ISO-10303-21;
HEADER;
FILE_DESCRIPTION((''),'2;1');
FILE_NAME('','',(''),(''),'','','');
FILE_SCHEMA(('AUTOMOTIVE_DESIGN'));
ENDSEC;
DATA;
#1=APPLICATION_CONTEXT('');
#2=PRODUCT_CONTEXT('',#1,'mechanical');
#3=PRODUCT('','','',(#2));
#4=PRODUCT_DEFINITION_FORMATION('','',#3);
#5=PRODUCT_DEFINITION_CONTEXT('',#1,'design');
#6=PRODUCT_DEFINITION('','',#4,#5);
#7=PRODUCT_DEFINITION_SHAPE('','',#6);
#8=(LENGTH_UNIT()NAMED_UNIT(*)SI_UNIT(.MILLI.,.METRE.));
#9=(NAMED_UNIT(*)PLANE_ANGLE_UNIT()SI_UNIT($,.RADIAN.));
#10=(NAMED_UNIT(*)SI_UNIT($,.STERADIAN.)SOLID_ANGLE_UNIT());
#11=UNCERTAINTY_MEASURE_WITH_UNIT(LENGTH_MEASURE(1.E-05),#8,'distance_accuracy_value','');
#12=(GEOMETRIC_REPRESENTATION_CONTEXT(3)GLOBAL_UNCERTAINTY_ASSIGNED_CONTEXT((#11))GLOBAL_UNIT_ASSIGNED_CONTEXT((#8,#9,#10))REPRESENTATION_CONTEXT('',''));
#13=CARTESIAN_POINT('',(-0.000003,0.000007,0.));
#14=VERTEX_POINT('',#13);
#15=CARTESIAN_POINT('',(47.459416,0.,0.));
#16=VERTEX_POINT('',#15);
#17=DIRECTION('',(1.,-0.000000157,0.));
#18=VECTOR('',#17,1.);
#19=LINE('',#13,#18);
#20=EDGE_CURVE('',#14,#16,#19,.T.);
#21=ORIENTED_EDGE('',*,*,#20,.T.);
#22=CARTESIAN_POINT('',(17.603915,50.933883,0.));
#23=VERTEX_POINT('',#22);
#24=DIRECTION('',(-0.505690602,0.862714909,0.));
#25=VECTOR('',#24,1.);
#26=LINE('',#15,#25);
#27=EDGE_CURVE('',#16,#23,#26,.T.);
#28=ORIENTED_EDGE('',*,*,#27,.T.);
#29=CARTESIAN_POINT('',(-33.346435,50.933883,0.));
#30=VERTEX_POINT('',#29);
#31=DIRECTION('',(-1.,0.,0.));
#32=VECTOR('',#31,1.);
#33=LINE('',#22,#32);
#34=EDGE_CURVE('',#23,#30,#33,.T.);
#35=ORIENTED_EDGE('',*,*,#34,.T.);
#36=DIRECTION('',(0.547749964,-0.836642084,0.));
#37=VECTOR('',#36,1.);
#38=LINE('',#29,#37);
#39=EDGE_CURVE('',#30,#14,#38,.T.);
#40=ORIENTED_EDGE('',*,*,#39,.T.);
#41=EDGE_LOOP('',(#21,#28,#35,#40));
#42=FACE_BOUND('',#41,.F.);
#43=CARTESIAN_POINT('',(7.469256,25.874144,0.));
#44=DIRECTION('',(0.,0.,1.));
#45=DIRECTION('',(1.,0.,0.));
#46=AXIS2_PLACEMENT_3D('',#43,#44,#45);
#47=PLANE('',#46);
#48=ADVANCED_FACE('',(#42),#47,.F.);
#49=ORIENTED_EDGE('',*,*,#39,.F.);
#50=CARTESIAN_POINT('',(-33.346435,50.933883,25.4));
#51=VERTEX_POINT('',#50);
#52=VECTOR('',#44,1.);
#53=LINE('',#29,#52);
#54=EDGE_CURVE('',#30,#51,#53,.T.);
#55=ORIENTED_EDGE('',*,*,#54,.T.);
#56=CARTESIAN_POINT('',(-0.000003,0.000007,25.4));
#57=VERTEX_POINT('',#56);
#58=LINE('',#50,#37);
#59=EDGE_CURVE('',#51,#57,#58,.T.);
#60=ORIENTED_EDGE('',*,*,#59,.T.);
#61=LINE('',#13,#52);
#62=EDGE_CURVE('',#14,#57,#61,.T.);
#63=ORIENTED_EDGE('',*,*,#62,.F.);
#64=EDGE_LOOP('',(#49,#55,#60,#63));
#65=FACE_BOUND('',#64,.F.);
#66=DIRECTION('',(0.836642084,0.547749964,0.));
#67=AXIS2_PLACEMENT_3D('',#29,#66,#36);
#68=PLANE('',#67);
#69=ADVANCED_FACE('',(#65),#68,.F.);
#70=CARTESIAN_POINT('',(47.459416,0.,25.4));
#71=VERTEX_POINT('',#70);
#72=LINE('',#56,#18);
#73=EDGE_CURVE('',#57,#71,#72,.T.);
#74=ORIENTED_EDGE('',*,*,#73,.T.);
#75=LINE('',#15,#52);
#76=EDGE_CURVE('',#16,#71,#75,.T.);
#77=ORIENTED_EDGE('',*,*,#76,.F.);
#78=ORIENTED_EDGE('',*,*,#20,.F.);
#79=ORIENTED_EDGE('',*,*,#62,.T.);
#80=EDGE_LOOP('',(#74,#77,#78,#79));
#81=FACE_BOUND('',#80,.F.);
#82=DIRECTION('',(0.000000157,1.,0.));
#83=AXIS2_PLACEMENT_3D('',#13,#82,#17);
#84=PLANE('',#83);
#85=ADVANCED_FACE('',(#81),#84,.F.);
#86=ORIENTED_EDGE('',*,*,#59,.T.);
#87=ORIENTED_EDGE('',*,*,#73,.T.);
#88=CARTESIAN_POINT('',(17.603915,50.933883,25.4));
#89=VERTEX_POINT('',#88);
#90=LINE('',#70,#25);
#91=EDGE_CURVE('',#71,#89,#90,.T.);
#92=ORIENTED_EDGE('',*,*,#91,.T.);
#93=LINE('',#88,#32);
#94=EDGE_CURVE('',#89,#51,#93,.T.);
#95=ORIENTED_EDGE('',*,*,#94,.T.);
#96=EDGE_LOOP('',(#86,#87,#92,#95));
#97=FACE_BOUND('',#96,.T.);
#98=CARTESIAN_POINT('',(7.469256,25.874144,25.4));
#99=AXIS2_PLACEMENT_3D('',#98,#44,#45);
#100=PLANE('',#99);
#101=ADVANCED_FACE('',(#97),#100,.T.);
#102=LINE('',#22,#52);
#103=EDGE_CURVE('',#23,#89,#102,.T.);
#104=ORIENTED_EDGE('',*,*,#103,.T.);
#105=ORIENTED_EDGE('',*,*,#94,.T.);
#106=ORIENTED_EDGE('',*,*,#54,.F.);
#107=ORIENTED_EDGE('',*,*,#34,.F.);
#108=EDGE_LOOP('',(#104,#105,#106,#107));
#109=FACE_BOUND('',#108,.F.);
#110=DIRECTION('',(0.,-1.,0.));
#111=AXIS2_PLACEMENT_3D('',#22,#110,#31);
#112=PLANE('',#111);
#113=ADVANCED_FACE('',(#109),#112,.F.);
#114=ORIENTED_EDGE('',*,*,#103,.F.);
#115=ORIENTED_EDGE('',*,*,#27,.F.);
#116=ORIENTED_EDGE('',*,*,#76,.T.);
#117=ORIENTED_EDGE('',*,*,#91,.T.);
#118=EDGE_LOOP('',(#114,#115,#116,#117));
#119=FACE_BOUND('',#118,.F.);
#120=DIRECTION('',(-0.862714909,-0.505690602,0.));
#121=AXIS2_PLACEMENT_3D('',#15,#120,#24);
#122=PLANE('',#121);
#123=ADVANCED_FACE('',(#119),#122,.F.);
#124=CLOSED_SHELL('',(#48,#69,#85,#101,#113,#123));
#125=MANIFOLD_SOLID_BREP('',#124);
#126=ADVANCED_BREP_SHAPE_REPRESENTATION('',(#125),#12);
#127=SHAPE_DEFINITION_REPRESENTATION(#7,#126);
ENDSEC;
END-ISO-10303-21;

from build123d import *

# Parameters (mm, degrees)
F1_DEPTH = 25.4


# Not quite as in the source:
# - ends of sketch curves that miss each other by under 0.0002 mm in the source are joined


with BuildPart() as f1:
    # F0 (on Top) → F1 (new body)
    with BuildSketch(Plane.XY):
        Polygon((-33.3464348924, 50.9338825941), (-3.0268e-06, 7.4506e-06), (47.4594160914, 0), (17.6039151847, 50.9338825941), align=None)
    extrude(amount=F1_DEPTH)


solid = f1.part
